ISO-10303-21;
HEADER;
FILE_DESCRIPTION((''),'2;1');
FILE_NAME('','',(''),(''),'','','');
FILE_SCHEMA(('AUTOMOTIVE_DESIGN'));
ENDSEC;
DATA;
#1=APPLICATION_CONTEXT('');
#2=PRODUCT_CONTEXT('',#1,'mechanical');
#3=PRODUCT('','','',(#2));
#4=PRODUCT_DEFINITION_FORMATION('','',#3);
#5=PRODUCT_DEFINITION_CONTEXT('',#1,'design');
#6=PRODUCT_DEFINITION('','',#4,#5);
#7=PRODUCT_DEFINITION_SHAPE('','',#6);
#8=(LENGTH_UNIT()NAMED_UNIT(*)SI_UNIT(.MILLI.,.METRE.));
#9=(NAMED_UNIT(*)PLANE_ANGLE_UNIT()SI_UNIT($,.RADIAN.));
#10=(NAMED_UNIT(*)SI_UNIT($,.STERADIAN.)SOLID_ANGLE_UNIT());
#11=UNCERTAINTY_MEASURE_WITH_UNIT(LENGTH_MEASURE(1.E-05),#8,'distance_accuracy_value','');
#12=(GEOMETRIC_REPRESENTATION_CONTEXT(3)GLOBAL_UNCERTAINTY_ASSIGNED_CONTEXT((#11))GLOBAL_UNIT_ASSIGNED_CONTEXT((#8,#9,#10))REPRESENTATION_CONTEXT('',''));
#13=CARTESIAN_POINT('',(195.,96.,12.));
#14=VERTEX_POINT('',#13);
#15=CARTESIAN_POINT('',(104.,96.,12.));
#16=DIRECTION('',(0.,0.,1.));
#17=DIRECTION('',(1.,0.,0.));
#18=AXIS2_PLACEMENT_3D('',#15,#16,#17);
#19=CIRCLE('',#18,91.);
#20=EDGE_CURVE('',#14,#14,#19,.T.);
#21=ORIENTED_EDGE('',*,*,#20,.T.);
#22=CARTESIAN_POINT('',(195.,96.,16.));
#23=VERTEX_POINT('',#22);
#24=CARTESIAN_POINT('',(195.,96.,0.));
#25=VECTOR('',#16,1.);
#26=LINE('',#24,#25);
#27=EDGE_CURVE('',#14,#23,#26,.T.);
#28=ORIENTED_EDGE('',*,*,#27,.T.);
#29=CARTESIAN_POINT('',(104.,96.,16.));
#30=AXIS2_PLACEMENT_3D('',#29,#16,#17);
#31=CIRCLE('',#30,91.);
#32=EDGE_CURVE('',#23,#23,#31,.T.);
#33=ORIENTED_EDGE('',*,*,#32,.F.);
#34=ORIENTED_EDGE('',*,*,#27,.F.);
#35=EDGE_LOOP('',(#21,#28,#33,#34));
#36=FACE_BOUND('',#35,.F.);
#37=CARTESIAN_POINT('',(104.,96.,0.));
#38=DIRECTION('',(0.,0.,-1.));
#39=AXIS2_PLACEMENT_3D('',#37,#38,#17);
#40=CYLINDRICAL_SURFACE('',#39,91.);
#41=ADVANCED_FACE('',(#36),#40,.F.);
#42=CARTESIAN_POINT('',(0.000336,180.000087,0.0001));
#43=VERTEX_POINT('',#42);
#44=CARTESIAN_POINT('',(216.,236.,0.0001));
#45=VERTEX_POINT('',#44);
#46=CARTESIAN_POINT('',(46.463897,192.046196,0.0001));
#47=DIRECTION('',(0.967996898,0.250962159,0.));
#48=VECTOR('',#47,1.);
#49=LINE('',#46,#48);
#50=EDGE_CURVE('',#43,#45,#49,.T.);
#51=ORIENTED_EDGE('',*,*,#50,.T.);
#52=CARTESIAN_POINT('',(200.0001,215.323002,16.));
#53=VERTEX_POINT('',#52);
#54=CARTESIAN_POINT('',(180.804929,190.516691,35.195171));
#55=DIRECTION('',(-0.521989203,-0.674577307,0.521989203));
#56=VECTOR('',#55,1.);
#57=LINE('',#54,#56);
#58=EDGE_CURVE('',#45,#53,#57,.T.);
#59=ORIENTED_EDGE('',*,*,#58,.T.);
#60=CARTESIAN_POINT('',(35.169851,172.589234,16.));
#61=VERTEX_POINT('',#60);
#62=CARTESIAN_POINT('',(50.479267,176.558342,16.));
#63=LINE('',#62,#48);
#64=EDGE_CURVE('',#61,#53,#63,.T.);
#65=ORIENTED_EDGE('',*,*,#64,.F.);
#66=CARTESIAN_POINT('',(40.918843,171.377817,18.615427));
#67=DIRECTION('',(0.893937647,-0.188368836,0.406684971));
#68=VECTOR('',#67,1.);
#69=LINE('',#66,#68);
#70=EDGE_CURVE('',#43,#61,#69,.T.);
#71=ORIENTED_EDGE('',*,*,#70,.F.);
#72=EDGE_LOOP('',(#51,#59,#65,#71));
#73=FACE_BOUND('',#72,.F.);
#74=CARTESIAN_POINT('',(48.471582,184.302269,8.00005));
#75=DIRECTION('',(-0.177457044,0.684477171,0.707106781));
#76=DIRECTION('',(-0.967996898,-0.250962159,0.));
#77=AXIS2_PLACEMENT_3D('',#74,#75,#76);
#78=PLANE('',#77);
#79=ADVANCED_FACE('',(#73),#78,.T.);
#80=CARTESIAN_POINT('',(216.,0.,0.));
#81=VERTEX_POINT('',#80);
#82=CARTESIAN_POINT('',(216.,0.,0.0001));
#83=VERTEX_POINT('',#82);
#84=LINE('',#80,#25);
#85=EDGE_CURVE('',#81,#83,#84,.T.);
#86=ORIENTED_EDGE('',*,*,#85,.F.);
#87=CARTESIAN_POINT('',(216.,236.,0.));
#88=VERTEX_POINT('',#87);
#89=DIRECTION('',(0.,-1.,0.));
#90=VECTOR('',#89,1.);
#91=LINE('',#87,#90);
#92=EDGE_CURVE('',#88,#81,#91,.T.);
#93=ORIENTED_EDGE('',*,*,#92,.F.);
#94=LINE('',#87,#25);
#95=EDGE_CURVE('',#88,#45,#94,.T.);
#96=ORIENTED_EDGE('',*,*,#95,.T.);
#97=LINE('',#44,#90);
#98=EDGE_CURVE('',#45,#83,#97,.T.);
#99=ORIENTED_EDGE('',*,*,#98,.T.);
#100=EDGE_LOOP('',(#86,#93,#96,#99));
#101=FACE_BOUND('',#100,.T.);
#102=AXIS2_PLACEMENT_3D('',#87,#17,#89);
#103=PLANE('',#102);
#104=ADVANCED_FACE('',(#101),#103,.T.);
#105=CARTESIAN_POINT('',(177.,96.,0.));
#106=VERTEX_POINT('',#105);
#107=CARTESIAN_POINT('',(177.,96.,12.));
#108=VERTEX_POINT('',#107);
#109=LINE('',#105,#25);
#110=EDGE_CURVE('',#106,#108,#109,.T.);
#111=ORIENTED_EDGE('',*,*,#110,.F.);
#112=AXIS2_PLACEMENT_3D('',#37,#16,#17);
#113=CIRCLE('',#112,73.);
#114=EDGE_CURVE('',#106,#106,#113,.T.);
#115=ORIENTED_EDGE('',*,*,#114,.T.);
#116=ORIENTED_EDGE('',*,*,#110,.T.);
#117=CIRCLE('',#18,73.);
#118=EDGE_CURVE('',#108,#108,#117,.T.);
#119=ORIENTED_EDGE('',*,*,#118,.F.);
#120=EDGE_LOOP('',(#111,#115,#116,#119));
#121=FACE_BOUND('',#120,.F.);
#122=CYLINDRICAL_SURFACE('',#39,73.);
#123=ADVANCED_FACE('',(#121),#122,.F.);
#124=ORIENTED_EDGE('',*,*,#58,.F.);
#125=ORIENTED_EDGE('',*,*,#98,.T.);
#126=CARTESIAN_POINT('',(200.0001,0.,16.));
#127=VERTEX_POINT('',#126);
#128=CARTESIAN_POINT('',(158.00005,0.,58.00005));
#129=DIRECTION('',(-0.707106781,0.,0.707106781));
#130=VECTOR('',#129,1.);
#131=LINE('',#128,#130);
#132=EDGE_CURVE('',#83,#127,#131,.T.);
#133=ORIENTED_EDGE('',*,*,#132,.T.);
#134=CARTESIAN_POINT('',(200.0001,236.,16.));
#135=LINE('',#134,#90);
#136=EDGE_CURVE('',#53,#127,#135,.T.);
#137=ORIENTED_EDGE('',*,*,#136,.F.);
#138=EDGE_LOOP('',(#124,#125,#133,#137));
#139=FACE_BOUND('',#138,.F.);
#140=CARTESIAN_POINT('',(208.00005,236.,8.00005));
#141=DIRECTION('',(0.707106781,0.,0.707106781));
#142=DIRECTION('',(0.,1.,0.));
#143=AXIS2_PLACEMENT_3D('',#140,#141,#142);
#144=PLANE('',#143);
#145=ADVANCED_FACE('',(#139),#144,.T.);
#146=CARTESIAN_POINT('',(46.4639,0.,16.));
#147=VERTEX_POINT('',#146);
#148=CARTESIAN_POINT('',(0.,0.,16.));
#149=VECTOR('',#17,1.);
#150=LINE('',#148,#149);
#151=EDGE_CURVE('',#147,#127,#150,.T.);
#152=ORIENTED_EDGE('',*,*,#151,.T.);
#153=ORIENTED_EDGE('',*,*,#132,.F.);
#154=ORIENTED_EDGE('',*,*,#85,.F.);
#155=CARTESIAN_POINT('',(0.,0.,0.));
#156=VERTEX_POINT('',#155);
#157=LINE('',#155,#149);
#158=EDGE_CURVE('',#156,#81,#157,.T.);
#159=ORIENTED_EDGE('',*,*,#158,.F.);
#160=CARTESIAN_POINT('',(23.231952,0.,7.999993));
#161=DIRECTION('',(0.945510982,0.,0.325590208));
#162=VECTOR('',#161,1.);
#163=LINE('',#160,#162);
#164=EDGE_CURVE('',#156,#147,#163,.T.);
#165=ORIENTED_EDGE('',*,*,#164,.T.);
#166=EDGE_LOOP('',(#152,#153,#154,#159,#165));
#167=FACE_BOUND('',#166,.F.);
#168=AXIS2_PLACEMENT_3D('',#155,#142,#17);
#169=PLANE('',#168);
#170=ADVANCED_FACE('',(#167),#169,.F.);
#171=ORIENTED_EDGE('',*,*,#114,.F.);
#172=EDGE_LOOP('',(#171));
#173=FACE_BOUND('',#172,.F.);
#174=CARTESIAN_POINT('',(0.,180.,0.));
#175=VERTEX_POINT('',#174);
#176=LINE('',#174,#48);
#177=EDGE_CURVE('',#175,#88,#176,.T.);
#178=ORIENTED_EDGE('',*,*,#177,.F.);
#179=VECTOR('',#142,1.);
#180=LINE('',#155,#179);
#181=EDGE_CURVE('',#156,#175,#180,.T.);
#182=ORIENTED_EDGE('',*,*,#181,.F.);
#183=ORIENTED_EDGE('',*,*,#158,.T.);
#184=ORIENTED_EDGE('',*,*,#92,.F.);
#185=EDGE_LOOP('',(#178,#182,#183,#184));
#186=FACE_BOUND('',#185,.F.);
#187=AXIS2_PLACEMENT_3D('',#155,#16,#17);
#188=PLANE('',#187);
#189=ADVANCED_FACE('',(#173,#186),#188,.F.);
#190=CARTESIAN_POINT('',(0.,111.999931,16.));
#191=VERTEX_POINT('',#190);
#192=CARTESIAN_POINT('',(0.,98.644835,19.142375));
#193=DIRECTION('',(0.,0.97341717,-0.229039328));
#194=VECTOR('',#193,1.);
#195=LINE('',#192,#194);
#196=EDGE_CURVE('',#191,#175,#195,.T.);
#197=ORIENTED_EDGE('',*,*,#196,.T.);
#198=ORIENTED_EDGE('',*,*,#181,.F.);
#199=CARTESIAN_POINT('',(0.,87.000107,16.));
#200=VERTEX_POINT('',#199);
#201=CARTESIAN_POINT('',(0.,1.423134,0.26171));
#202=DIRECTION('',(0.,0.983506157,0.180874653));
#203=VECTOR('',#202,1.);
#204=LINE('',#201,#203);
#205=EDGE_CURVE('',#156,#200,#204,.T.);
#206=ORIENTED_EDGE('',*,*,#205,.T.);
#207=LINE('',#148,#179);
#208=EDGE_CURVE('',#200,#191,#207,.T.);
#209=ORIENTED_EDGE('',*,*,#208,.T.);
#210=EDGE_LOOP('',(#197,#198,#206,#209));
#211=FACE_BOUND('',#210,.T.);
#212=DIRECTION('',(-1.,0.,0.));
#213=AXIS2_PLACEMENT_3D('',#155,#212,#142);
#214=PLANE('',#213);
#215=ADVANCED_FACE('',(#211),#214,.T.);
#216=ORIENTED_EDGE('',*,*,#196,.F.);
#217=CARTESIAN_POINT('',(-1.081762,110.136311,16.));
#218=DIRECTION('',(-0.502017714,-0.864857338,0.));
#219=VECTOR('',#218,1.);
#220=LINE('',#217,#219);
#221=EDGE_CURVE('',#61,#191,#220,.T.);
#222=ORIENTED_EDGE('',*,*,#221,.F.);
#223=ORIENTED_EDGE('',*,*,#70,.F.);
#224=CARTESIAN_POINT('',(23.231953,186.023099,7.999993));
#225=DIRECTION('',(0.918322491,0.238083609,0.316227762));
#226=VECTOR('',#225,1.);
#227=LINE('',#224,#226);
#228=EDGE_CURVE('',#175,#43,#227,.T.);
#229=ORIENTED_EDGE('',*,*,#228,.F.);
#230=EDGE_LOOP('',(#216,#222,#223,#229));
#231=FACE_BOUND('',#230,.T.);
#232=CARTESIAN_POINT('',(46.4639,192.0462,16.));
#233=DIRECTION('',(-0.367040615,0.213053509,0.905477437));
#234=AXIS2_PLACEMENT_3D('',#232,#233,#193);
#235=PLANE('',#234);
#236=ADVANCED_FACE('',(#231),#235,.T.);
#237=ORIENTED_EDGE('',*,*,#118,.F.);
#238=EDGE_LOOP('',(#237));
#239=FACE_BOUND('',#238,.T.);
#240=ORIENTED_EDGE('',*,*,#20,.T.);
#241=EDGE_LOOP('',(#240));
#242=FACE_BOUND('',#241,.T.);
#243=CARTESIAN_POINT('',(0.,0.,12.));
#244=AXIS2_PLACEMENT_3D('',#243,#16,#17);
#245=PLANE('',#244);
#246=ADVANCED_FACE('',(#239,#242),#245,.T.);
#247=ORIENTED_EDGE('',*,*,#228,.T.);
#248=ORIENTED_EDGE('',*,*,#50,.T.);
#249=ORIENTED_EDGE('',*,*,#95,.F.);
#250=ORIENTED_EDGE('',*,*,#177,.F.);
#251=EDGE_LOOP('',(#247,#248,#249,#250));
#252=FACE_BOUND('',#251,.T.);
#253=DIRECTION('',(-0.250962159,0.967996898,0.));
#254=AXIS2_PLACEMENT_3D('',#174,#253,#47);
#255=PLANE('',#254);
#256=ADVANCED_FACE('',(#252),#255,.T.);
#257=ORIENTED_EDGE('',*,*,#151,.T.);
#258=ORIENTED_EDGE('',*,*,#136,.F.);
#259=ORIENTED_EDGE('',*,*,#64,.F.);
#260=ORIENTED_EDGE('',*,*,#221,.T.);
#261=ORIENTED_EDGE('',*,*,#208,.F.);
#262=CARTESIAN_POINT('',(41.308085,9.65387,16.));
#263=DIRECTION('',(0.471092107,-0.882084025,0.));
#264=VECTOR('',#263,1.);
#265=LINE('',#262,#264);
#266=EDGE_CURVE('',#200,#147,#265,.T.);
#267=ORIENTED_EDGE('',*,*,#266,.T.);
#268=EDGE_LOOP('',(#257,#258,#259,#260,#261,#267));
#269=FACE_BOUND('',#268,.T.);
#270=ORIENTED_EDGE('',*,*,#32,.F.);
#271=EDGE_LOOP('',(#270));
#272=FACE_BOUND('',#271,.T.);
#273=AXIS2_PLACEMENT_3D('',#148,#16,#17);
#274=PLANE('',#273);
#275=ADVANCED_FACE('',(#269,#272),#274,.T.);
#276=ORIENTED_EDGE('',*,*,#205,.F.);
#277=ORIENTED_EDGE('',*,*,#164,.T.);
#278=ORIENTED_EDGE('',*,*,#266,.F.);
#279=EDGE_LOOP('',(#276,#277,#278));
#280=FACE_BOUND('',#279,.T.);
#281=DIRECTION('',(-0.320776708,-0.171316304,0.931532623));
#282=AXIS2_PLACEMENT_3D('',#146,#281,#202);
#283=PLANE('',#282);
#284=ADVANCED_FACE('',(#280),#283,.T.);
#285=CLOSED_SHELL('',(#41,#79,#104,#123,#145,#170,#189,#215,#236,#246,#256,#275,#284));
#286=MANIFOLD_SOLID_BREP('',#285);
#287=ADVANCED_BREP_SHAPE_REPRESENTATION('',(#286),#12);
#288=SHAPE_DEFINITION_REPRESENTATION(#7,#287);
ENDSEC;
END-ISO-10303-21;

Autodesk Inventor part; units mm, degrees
ref_plane "YZ Plane" through (0, 0, 0) normal (1, 0, 0) x (0, 1, 0)
sketch "Эскиз1" plane through (0, 0, 0) normal (0, 0, 1) x (1, 0, 0)
  line L0 (0, 0) -> (216, 0)
  circle A0 centre (104, 96) radius 73
  circle A1 centre (104, 96) radius 91
  line L1 (0, 180) -> (216, 236)
  line L2 (0, 87) -> (48, 0) construction
  line L3 (0, 0) -> (0, 180)
  line L4 (216, 236) -> (216, 0)
  line L5 (48, 192.4444) -> (0, 112) construction
  point P0 (43.1585, 192.0844)
  point P1 (92.1531, 205.8029)
  dimension "d2" = 146
  dimension "d3" = 182
  dimension "d6" = 236
  dimension "d7" = 180
  dimension "d8" = 96
  dimension "d15" = 48
  dimension "d16" = 48
  dimension "d17" = 87
  dimension "d18" = 68
  dimension "d22" = 216
extrude "Выдавливание2" add sketch "Эскиз1" along normal blind 12 contours A1
extrude "Выдавливание3" add sketch "Эскиз1" along normal blind 16 contours L3 L1 L4 L0
sketch "Эскиз4" plane through (0, 0, 0) normal (-1, 0, 0) x (0, 0, 1)
  line L0 (16, 180) -> (16, 0) projected
  point P0 (0, 0)
  point P1 (16, 87)
  point P2 (16, 112)
  dimension "d19" = 87
  dimension "d20" = 68
sketch "Эскиз5" plane through (0, 180, 16) normal (-0.2509622, 0.9679969, 0) x (0.9679969, 0.2509622, 0)
  line L0 (223.1412, 0) -> (0, 0) projected
  point P0 (-45.1732, 16)
  point P1 (48, 0)
  dimension "d21" = 48
ref_plane "РабПлоскость1" through (46.4639, 192.0462, 16) normal (-0.3670406, 0.2130535, 0.9054774) x (-0.9183225, -0.2380836, -0.3162278)
split "Разделение1" plane through (46.4639, 192.0462, 16) removes the side toward (-0.3670406, 0.2130535, 0.9054774)
sketch "Эскиз6" plane through (0, 0, 0) normal (0, -1, 0) x (1, 0, 0)
  line L0 (216, 16) -> (46.4639, 16) projected
  point P0 (0, 0)
ref_plane "РабПлоскость2" through (46.4639, 0, 16) normal (0.3207767, 0.1713163, -0.9315326) x (-0.945511, 0, -0.3255902)
split "Разделение2" plane through (46.4639, 0, 16) removes the side toward (-0.3207767, -0.1713163, 0.9315326)
chamfer "Фаска1" distance 16 angle 45 2 edges at (216, 118, 16) (131.2319, 214.0231, 16)
properties part number "Front1"
